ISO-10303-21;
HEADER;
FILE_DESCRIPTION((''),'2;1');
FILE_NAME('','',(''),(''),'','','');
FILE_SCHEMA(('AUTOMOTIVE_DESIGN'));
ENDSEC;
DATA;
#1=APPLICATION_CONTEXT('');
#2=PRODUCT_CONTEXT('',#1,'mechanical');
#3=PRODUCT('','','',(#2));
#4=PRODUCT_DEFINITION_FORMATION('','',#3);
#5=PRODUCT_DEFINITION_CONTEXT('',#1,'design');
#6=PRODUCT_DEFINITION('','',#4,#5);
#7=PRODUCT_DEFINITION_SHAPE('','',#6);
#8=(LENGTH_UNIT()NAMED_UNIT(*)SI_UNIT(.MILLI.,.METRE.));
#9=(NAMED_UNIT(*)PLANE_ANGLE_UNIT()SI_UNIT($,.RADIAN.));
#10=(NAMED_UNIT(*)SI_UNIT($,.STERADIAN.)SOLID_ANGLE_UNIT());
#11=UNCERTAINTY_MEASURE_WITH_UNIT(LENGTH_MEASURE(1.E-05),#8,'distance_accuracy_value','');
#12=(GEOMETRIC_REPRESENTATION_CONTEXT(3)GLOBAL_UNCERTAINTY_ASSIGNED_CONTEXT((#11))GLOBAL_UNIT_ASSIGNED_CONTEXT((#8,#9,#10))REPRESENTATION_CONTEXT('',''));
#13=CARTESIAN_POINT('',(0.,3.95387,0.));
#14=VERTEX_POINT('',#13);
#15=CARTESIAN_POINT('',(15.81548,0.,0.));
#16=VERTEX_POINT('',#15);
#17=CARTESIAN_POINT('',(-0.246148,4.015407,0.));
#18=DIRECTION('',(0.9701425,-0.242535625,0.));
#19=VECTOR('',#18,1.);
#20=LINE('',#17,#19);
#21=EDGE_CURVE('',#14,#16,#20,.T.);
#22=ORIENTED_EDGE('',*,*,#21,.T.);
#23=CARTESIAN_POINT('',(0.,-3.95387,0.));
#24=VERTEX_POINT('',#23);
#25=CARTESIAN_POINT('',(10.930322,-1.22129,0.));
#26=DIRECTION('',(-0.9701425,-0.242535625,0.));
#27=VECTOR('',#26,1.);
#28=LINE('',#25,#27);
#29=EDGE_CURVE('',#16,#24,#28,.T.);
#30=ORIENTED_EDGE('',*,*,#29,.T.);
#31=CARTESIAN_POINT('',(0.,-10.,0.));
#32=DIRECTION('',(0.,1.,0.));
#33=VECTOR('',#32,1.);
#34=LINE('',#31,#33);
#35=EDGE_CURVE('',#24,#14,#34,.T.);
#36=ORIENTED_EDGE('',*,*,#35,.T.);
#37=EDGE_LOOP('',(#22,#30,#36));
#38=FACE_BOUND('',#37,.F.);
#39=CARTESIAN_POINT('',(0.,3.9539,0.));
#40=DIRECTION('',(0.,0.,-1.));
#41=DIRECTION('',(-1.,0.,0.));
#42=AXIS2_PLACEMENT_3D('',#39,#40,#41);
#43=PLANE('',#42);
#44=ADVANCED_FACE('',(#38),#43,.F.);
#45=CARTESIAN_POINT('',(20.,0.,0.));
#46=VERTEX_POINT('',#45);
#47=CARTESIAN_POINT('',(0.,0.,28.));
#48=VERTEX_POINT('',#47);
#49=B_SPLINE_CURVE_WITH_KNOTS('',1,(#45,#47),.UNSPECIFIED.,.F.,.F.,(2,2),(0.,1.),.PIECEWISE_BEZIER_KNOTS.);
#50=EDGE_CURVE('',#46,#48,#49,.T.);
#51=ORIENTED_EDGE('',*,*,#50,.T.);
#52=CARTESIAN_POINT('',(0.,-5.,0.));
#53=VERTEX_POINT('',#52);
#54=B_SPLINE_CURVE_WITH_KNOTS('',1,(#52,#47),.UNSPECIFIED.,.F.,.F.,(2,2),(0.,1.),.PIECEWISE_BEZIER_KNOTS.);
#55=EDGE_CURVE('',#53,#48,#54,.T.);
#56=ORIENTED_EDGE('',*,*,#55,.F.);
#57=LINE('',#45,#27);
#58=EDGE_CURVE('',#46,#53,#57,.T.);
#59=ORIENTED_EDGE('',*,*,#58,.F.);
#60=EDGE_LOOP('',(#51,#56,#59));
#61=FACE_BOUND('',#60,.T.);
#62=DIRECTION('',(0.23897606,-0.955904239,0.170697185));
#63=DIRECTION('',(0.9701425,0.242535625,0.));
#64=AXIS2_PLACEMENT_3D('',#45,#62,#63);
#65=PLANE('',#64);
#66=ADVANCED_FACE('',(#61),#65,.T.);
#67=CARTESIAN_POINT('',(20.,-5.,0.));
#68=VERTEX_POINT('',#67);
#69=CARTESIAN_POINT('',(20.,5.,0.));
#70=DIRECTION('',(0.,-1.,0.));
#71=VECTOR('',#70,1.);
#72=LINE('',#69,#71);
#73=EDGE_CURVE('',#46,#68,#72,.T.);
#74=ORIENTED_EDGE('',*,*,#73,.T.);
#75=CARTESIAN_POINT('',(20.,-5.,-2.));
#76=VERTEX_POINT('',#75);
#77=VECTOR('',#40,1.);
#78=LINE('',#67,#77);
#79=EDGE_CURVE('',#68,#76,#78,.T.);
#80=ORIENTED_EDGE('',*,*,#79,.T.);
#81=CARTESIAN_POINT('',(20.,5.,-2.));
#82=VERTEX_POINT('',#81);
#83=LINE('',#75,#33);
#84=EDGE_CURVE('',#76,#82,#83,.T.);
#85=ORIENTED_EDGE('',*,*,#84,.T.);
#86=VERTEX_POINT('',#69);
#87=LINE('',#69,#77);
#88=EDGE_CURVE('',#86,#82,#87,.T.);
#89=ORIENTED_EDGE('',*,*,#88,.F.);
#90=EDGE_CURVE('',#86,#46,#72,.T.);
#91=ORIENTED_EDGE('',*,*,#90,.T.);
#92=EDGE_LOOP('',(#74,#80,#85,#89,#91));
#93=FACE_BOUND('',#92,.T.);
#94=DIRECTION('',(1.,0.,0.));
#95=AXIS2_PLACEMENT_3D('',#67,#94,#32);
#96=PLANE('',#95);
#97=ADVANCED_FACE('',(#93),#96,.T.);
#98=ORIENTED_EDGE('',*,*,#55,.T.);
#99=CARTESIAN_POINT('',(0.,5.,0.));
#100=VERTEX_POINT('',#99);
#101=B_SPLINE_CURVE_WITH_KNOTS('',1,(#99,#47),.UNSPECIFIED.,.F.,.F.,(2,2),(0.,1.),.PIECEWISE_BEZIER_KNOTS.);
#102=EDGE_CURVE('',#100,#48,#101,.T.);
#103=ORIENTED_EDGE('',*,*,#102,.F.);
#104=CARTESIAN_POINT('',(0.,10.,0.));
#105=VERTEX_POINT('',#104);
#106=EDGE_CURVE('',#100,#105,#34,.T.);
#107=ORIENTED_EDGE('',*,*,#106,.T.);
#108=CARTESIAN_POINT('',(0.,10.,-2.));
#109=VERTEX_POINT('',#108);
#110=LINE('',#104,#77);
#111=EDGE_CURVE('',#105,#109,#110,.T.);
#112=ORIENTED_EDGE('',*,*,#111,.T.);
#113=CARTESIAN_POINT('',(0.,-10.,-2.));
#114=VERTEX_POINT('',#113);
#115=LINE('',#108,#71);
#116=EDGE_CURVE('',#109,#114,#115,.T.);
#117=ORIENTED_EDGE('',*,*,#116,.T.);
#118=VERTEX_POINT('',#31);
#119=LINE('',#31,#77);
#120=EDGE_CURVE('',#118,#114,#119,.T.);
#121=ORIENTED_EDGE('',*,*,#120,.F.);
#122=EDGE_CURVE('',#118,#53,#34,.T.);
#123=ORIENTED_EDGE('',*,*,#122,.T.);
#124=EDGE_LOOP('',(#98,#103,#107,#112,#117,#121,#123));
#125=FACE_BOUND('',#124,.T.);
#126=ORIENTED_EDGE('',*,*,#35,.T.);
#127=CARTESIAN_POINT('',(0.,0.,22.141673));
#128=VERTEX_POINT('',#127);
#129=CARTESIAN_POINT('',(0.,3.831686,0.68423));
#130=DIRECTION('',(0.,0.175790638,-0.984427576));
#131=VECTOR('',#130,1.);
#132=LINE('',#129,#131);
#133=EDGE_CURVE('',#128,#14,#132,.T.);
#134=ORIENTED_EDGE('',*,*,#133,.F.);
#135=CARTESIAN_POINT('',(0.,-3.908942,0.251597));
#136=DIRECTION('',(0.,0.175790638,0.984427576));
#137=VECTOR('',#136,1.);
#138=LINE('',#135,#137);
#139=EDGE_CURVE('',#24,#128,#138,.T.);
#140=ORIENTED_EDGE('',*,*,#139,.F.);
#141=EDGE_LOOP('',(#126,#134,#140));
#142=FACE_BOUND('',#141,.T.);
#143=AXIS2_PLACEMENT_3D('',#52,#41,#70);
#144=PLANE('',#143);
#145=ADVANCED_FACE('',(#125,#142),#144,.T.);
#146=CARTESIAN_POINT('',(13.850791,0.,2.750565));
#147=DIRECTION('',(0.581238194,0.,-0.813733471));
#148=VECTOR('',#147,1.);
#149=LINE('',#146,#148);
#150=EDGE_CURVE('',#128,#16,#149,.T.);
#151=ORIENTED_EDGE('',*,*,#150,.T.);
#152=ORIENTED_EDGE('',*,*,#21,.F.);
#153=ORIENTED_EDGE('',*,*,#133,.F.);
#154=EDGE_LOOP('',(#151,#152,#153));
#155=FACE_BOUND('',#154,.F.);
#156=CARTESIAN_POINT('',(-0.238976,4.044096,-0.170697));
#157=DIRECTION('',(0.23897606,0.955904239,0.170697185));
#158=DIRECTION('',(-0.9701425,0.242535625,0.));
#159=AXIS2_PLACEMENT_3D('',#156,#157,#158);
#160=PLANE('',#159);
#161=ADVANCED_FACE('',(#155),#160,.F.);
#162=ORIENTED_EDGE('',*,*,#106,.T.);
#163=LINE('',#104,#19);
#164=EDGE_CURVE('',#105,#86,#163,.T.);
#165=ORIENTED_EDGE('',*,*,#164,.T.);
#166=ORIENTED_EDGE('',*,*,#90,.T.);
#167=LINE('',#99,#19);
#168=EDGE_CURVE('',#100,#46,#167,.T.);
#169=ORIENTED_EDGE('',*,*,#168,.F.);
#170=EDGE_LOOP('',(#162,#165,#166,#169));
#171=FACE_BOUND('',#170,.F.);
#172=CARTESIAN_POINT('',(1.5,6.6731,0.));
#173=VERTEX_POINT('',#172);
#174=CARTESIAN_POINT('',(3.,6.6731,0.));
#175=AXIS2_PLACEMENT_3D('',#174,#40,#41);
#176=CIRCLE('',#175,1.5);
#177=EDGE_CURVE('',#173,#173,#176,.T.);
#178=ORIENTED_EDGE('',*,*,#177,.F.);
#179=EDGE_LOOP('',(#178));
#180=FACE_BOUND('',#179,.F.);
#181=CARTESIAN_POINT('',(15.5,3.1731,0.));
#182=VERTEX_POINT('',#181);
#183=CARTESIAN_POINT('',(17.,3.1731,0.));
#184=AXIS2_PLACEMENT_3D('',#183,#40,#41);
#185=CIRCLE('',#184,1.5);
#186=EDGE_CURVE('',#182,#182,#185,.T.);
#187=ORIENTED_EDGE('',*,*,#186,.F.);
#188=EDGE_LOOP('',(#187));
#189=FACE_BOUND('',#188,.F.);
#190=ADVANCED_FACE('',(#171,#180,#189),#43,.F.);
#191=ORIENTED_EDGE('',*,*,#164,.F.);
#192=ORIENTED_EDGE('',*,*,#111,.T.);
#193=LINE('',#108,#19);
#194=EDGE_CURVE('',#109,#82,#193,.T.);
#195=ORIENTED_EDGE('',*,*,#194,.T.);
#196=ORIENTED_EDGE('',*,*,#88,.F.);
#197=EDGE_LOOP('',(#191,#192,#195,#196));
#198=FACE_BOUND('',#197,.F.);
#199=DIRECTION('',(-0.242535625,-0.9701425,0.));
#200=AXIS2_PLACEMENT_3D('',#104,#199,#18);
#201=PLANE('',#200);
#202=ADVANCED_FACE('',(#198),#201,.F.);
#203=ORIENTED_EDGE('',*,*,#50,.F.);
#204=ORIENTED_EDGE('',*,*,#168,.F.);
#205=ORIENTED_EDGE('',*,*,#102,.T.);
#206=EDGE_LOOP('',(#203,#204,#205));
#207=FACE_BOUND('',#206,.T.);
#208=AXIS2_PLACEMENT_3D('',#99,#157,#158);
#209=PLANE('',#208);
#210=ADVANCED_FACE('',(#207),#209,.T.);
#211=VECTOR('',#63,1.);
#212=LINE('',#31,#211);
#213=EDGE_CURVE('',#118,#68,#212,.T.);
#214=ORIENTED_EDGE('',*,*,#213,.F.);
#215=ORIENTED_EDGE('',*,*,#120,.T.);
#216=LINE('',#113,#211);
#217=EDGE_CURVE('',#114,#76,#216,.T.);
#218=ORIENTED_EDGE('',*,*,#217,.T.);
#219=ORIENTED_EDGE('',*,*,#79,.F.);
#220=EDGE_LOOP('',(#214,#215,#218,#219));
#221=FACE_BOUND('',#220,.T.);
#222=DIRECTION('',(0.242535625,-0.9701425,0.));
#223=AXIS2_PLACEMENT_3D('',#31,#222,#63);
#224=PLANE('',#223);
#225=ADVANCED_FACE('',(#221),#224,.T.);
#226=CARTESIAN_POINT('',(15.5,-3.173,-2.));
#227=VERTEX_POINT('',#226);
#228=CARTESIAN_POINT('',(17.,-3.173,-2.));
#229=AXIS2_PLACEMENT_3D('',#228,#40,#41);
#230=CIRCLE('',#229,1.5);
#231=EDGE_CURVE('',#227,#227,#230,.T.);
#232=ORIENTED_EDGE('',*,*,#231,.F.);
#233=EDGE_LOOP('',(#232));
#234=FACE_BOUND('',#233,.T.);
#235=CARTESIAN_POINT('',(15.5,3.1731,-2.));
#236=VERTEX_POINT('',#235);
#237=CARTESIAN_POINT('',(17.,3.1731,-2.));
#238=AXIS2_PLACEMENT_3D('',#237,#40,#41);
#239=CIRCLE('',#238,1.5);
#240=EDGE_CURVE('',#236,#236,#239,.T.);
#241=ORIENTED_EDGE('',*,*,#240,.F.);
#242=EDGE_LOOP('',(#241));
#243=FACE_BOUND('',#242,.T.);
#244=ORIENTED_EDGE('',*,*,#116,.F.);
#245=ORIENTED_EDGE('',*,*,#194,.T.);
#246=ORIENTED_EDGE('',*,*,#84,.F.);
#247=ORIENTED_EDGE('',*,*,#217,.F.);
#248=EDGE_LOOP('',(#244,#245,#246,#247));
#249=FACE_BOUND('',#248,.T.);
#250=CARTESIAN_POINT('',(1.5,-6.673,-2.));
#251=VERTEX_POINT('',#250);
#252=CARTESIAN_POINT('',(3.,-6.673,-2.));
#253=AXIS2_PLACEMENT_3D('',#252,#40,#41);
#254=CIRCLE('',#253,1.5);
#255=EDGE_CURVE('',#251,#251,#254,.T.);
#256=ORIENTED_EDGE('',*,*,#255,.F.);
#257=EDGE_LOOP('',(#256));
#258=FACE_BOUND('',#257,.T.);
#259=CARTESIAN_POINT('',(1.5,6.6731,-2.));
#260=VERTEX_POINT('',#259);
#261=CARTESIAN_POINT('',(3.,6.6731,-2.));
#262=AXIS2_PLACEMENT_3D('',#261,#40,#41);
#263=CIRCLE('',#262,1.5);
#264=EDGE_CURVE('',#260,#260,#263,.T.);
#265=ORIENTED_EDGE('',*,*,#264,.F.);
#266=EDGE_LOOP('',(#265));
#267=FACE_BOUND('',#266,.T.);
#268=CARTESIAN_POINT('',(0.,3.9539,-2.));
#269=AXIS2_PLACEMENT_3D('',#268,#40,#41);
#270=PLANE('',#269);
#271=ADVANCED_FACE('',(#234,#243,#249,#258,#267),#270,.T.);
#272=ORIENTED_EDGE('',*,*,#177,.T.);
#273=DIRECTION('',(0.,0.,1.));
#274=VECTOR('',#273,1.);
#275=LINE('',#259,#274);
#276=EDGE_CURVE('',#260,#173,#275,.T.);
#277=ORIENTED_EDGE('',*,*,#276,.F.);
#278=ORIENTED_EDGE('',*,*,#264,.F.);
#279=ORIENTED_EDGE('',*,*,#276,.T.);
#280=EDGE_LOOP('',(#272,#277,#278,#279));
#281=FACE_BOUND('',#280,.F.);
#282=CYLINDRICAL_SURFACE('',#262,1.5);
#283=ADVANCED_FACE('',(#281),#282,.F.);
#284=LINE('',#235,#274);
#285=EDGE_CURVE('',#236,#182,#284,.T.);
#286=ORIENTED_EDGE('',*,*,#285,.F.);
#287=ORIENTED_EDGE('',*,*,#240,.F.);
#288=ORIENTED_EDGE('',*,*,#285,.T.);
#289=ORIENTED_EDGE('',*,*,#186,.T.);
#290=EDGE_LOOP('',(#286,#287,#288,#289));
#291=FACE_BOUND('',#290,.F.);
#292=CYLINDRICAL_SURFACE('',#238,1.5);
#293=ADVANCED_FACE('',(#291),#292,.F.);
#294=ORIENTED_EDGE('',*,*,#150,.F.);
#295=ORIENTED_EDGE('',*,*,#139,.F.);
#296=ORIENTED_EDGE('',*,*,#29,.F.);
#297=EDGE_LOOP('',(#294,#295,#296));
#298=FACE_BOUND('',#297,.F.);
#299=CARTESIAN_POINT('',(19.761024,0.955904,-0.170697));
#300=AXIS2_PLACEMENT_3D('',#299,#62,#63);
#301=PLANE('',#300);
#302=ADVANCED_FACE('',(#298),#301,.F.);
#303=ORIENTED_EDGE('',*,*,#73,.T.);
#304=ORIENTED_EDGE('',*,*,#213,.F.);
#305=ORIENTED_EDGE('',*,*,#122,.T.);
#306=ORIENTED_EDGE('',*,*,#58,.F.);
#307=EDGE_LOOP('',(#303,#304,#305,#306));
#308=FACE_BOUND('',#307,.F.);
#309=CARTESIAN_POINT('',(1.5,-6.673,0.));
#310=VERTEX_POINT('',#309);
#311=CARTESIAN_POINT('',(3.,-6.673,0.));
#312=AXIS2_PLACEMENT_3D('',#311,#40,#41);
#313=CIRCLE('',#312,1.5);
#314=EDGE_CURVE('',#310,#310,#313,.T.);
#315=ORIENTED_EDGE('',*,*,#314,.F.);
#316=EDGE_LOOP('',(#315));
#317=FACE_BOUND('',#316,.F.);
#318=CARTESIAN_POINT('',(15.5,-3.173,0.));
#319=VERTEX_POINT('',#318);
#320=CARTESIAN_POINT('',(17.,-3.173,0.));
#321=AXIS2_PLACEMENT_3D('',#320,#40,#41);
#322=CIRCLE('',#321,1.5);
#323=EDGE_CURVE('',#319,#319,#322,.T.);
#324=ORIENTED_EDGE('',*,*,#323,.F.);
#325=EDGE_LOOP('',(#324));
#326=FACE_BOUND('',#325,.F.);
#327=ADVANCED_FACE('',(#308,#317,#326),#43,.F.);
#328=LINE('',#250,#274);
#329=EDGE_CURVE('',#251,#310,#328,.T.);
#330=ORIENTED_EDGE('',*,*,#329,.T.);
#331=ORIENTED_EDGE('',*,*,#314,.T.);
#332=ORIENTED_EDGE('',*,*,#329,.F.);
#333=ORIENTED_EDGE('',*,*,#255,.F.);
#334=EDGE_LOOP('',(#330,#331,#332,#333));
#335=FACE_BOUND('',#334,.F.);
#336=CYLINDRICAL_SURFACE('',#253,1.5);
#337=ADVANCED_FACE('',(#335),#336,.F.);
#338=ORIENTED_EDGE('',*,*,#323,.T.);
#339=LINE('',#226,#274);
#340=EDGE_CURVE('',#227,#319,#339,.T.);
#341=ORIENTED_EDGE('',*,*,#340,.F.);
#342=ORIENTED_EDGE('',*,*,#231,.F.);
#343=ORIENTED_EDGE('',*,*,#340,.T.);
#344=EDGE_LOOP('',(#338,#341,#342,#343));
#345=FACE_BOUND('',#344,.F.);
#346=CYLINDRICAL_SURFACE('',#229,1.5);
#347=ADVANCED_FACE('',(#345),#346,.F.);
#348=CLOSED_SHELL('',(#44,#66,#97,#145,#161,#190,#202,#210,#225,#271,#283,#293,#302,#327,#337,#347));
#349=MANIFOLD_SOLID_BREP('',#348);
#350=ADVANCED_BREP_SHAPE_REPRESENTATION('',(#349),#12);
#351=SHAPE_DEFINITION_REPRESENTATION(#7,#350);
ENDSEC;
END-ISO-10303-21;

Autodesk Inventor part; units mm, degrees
ref_plane "YZ Plane" through (0, 0, 0) normal (1, 0, 0) x (0, 1, 0)
ref_plane "XZ Plane" through (0, 0, 0) normal (0, 1, 0) x (-1, 0, 0)
ref_plane "XY Plane" through (0, 0, 0) normal (0, 0, 1) x (1, 0, 0)
sketch "草图1" plane through (0, 0, 0) normal (0, 0, 1) x (1, 0, 0)
  line L0 (0, 5) -> (20, 0)
  line L1 (20, 0) -> (0, -5)
  line L2 (0, -5) -> (0, 5)
  point P0 (0, 0)
  point P1 (0, 0)
  dimension "d0" = 10
  dimension "d1" = 20
sketch "草图2" plane through (0, 0, 0) normal (1, 0, 0) x (0, 1, 0)
  point P0 (0, 0)
  point P1 (0, 28)
  dimension "d2" = 28
loft "放样1" add profiles "草图1" section 2 point at (0, 0, 28)
shell "抽壳1" thickness 1 removed faces 2 at (6.6667, 0, 0) at (0, 0, 9.3333)
sketch "草图3" plane through (0, 3.9539, 0) normal (0, 0, -1) x (-1, 0, 0)
  line L0 (0, -13.9539) -> (-20, -13.9539)
  line L1 (-20, -13.9539) -> (-20, 6.0461)
  line L2 (-20, 6.0461) -> (0, 6.0461)
  line L3 (0, 6.0461) -> (0, -13.9539)
  line L4 (0, -13.9539) -> (-20, -8.9539)
  line L5 (0, 6.0461) -> (-20, 1.0461)
  line L6 (-20, -3.9539) -> (0, -8.9539) projected
  line L7 (0, 1.0461) -> (-20, -3.9539) projected
  point P0 (0, -3.9539)
  point P1 (0, -3.9539)
  dimension "d8" = 20
extrude "拉伸1" add sketch "草图3" along normal blind 2 contours L4 L1 L6 L3 | L6 L7 L3 | L7 L1 L5 L3
sketch "草图4" plane through (0, 3.9539, -2) normal (0, 0, -1) x (-1, 0, 0)
  circle A0 centre (-3, -10.6269) radius 1.5
  line L0 (-20, -8.9539) -> (0, -13.9539) projected
  circle A1 centre (-17, -7.1269) radius 1.5
  circle A2 centre (-3, 2.7192) radius 1.5
  circle A3 centre (-17, -0.7808) radius 1.5
  line L1 (0, 6.0461) -> (-20, 1.0461) projected
  line L2 (-20, 1.0461) -> (-20, -8.9539) projected
  line L3 (0, -13.9539) -> (0, 6.0461) projected
  point P0 (0, -3.9539)
  dimension "d11" = 3
  dimension "d12" = 2.5
  dimension "d13" = 3
  dimension "d14" = 3
  dimension "d15" = 3
  dimension "d16" = 2.5
  dimension "d17" = 2.5
  dimension "d18" = 2.5
  dimension "d19" = 3
  dimension "d20" = 3
  dimension "d21" = 3
  dimension "d22" = 3
extrude "拉伸2" cut sketch "草图4" against normal through all contours A0 | A1 | A2 | A3
properties part number "分离前导形片"
